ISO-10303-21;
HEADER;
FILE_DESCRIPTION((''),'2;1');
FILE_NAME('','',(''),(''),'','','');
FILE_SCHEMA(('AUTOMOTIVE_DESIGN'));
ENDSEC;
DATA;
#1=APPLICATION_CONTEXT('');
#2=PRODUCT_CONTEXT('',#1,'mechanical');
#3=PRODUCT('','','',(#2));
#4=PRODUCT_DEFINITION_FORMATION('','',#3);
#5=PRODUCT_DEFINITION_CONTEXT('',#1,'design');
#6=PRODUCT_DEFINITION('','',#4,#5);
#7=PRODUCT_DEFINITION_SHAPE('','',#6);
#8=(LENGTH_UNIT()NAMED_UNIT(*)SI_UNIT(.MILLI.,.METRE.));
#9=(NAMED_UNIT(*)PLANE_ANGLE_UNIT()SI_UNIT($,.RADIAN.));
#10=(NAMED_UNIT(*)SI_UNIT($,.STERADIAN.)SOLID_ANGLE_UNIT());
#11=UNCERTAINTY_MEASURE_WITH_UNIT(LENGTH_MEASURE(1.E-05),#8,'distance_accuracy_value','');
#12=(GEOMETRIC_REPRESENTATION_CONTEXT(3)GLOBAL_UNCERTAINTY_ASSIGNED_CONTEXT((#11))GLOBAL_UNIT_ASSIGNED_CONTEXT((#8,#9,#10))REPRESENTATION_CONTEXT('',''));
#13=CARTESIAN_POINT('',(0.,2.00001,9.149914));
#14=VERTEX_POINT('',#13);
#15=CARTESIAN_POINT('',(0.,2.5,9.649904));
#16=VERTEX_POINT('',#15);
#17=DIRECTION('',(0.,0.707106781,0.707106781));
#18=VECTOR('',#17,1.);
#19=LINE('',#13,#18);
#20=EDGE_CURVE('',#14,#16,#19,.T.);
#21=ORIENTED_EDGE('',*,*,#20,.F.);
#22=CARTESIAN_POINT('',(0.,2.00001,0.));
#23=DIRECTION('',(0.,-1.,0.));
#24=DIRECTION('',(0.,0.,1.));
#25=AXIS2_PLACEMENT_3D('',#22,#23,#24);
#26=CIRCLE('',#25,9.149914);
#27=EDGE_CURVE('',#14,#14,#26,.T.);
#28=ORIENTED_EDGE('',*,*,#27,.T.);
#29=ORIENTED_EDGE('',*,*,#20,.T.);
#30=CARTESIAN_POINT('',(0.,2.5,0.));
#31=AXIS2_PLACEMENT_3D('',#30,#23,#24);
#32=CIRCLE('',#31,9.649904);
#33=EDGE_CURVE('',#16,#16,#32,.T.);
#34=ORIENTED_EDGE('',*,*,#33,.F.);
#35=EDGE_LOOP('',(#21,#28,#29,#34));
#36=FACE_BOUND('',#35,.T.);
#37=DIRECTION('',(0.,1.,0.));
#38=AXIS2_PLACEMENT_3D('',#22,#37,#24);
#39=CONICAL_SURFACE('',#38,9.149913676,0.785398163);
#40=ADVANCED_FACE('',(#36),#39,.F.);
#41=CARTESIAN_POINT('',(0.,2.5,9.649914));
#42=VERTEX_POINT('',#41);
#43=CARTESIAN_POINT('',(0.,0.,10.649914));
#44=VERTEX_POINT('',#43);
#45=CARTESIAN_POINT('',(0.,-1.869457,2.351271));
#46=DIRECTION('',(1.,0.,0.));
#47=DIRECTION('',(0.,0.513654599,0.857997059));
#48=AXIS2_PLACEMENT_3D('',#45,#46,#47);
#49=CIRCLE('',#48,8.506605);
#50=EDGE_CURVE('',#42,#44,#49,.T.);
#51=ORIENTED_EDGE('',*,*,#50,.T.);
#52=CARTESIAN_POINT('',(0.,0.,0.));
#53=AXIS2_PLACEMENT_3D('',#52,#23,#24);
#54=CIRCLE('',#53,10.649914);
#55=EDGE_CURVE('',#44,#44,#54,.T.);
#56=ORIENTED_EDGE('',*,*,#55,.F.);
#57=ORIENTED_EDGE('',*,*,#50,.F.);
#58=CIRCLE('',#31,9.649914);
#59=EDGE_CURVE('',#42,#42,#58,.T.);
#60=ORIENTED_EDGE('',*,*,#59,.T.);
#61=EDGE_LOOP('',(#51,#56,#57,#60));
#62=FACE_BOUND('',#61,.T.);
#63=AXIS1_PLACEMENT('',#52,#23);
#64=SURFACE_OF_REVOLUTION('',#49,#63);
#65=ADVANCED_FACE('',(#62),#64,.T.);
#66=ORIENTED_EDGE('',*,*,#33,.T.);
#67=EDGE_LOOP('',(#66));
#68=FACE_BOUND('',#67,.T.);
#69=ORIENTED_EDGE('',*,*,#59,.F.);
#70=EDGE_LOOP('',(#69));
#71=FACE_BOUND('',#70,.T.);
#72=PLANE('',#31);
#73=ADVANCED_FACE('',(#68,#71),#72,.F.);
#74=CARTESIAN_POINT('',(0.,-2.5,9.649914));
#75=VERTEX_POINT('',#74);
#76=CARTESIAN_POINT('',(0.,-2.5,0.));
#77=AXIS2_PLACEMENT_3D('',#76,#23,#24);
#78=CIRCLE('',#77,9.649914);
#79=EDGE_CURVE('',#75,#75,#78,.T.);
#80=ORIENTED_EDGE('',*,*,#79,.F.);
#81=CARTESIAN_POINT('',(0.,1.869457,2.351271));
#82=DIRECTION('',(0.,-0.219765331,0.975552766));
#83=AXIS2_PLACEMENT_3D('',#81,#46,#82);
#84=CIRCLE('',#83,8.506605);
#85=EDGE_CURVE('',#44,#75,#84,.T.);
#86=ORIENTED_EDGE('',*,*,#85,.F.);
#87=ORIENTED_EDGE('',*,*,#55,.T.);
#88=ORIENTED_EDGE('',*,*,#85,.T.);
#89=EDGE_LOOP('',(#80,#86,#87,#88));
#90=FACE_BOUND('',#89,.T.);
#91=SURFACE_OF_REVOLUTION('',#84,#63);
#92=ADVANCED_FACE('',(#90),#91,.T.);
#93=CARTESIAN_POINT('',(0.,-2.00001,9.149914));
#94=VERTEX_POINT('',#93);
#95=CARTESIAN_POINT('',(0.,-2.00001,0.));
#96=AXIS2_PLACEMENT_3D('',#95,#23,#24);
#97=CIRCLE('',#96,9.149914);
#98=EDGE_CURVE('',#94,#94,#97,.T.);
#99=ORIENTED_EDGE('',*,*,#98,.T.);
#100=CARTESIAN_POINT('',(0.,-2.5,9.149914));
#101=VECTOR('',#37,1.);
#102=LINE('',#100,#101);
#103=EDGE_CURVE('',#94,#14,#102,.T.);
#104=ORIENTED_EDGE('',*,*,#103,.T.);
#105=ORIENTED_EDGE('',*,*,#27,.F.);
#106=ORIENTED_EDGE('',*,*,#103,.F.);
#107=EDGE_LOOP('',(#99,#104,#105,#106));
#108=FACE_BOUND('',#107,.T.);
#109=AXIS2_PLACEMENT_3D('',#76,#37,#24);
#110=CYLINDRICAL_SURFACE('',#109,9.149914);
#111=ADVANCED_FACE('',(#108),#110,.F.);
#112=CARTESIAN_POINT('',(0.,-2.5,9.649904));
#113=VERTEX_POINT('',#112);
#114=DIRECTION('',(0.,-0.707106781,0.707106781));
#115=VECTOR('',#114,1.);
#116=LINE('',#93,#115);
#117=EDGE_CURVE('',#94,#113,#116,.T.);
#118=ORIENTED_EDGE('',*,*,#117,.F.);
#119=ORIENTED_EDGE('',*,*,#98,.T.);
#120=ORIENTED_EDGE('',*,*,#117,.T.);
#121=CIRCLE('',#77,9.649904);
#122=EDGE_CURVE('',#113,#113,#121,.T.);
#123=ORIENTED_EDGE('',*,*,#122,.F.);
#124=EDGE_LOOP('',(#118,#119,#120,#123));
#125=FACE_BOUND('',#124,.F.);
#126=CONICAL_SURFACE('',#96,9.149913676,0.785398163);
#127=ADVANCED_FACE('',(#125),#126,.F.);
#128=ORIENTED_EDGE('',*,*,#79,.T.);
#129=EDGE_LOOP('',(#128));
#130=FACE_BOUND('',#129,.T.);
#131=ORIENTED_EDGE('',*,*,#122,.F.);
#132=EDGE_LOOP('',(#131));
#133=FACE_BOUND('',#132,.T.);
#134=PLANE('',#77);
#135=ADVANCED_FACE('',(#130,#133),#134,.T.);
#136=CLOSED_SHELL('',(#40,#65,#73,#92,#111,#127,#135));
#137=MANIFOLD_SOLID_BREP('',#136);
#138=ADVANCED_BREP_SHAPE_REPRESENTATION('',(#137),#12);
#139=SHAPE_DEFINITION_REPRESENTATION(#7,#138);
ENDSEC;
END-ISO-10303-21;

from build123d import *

# Parameters (mm, degrees)
F3_SIZE = 0.49999


# Not quite as in the source:
# - a fillet or chamfer is up to 0.001 mm smaller than in the source, because OpenCascade refuses the exact size


with BuildPart() as f2:
    # F1 (on Right) → F2 (revolve)
    with BuildSketch(Plane.YZ):
        with BuildLine():
            Line((-2.5, 9.1499136761), (0, 9.1499136761))
            Line((0, 9.1499136761), (2.5, 9.1499136761))
            Line((2.5, 9.1499136761), (2.5, 9.6499136761))
            ThreePointArc((2.5, 9.6499136761), (1.2898169642, 10.2494560866), (0, 10.6499136761))
            ThreePointArc((0, 10.6499136761), (-1.2898169642, 10.2494560866), (-2.5, 9.6499136761))
            Line((-2.5, 9.6499136761), (-2.5, 9.1499136761))
        make_face()
    revolve(axis=Axis((0, 0, 0), (0, -1, 0)))

    # F3 (size 0.5 in the source; OpenCascade refuses exactly that, so slightly less here)
    f3_edges = [f2.edges().sort_by_distance(p)[0] for p in [
        (0, -2.5, -9.149914),
        (0, 2.5, -9.149914),
    ]]
    chamfer(f3_edges, length=F3_SIZE)


solid = f2.part
